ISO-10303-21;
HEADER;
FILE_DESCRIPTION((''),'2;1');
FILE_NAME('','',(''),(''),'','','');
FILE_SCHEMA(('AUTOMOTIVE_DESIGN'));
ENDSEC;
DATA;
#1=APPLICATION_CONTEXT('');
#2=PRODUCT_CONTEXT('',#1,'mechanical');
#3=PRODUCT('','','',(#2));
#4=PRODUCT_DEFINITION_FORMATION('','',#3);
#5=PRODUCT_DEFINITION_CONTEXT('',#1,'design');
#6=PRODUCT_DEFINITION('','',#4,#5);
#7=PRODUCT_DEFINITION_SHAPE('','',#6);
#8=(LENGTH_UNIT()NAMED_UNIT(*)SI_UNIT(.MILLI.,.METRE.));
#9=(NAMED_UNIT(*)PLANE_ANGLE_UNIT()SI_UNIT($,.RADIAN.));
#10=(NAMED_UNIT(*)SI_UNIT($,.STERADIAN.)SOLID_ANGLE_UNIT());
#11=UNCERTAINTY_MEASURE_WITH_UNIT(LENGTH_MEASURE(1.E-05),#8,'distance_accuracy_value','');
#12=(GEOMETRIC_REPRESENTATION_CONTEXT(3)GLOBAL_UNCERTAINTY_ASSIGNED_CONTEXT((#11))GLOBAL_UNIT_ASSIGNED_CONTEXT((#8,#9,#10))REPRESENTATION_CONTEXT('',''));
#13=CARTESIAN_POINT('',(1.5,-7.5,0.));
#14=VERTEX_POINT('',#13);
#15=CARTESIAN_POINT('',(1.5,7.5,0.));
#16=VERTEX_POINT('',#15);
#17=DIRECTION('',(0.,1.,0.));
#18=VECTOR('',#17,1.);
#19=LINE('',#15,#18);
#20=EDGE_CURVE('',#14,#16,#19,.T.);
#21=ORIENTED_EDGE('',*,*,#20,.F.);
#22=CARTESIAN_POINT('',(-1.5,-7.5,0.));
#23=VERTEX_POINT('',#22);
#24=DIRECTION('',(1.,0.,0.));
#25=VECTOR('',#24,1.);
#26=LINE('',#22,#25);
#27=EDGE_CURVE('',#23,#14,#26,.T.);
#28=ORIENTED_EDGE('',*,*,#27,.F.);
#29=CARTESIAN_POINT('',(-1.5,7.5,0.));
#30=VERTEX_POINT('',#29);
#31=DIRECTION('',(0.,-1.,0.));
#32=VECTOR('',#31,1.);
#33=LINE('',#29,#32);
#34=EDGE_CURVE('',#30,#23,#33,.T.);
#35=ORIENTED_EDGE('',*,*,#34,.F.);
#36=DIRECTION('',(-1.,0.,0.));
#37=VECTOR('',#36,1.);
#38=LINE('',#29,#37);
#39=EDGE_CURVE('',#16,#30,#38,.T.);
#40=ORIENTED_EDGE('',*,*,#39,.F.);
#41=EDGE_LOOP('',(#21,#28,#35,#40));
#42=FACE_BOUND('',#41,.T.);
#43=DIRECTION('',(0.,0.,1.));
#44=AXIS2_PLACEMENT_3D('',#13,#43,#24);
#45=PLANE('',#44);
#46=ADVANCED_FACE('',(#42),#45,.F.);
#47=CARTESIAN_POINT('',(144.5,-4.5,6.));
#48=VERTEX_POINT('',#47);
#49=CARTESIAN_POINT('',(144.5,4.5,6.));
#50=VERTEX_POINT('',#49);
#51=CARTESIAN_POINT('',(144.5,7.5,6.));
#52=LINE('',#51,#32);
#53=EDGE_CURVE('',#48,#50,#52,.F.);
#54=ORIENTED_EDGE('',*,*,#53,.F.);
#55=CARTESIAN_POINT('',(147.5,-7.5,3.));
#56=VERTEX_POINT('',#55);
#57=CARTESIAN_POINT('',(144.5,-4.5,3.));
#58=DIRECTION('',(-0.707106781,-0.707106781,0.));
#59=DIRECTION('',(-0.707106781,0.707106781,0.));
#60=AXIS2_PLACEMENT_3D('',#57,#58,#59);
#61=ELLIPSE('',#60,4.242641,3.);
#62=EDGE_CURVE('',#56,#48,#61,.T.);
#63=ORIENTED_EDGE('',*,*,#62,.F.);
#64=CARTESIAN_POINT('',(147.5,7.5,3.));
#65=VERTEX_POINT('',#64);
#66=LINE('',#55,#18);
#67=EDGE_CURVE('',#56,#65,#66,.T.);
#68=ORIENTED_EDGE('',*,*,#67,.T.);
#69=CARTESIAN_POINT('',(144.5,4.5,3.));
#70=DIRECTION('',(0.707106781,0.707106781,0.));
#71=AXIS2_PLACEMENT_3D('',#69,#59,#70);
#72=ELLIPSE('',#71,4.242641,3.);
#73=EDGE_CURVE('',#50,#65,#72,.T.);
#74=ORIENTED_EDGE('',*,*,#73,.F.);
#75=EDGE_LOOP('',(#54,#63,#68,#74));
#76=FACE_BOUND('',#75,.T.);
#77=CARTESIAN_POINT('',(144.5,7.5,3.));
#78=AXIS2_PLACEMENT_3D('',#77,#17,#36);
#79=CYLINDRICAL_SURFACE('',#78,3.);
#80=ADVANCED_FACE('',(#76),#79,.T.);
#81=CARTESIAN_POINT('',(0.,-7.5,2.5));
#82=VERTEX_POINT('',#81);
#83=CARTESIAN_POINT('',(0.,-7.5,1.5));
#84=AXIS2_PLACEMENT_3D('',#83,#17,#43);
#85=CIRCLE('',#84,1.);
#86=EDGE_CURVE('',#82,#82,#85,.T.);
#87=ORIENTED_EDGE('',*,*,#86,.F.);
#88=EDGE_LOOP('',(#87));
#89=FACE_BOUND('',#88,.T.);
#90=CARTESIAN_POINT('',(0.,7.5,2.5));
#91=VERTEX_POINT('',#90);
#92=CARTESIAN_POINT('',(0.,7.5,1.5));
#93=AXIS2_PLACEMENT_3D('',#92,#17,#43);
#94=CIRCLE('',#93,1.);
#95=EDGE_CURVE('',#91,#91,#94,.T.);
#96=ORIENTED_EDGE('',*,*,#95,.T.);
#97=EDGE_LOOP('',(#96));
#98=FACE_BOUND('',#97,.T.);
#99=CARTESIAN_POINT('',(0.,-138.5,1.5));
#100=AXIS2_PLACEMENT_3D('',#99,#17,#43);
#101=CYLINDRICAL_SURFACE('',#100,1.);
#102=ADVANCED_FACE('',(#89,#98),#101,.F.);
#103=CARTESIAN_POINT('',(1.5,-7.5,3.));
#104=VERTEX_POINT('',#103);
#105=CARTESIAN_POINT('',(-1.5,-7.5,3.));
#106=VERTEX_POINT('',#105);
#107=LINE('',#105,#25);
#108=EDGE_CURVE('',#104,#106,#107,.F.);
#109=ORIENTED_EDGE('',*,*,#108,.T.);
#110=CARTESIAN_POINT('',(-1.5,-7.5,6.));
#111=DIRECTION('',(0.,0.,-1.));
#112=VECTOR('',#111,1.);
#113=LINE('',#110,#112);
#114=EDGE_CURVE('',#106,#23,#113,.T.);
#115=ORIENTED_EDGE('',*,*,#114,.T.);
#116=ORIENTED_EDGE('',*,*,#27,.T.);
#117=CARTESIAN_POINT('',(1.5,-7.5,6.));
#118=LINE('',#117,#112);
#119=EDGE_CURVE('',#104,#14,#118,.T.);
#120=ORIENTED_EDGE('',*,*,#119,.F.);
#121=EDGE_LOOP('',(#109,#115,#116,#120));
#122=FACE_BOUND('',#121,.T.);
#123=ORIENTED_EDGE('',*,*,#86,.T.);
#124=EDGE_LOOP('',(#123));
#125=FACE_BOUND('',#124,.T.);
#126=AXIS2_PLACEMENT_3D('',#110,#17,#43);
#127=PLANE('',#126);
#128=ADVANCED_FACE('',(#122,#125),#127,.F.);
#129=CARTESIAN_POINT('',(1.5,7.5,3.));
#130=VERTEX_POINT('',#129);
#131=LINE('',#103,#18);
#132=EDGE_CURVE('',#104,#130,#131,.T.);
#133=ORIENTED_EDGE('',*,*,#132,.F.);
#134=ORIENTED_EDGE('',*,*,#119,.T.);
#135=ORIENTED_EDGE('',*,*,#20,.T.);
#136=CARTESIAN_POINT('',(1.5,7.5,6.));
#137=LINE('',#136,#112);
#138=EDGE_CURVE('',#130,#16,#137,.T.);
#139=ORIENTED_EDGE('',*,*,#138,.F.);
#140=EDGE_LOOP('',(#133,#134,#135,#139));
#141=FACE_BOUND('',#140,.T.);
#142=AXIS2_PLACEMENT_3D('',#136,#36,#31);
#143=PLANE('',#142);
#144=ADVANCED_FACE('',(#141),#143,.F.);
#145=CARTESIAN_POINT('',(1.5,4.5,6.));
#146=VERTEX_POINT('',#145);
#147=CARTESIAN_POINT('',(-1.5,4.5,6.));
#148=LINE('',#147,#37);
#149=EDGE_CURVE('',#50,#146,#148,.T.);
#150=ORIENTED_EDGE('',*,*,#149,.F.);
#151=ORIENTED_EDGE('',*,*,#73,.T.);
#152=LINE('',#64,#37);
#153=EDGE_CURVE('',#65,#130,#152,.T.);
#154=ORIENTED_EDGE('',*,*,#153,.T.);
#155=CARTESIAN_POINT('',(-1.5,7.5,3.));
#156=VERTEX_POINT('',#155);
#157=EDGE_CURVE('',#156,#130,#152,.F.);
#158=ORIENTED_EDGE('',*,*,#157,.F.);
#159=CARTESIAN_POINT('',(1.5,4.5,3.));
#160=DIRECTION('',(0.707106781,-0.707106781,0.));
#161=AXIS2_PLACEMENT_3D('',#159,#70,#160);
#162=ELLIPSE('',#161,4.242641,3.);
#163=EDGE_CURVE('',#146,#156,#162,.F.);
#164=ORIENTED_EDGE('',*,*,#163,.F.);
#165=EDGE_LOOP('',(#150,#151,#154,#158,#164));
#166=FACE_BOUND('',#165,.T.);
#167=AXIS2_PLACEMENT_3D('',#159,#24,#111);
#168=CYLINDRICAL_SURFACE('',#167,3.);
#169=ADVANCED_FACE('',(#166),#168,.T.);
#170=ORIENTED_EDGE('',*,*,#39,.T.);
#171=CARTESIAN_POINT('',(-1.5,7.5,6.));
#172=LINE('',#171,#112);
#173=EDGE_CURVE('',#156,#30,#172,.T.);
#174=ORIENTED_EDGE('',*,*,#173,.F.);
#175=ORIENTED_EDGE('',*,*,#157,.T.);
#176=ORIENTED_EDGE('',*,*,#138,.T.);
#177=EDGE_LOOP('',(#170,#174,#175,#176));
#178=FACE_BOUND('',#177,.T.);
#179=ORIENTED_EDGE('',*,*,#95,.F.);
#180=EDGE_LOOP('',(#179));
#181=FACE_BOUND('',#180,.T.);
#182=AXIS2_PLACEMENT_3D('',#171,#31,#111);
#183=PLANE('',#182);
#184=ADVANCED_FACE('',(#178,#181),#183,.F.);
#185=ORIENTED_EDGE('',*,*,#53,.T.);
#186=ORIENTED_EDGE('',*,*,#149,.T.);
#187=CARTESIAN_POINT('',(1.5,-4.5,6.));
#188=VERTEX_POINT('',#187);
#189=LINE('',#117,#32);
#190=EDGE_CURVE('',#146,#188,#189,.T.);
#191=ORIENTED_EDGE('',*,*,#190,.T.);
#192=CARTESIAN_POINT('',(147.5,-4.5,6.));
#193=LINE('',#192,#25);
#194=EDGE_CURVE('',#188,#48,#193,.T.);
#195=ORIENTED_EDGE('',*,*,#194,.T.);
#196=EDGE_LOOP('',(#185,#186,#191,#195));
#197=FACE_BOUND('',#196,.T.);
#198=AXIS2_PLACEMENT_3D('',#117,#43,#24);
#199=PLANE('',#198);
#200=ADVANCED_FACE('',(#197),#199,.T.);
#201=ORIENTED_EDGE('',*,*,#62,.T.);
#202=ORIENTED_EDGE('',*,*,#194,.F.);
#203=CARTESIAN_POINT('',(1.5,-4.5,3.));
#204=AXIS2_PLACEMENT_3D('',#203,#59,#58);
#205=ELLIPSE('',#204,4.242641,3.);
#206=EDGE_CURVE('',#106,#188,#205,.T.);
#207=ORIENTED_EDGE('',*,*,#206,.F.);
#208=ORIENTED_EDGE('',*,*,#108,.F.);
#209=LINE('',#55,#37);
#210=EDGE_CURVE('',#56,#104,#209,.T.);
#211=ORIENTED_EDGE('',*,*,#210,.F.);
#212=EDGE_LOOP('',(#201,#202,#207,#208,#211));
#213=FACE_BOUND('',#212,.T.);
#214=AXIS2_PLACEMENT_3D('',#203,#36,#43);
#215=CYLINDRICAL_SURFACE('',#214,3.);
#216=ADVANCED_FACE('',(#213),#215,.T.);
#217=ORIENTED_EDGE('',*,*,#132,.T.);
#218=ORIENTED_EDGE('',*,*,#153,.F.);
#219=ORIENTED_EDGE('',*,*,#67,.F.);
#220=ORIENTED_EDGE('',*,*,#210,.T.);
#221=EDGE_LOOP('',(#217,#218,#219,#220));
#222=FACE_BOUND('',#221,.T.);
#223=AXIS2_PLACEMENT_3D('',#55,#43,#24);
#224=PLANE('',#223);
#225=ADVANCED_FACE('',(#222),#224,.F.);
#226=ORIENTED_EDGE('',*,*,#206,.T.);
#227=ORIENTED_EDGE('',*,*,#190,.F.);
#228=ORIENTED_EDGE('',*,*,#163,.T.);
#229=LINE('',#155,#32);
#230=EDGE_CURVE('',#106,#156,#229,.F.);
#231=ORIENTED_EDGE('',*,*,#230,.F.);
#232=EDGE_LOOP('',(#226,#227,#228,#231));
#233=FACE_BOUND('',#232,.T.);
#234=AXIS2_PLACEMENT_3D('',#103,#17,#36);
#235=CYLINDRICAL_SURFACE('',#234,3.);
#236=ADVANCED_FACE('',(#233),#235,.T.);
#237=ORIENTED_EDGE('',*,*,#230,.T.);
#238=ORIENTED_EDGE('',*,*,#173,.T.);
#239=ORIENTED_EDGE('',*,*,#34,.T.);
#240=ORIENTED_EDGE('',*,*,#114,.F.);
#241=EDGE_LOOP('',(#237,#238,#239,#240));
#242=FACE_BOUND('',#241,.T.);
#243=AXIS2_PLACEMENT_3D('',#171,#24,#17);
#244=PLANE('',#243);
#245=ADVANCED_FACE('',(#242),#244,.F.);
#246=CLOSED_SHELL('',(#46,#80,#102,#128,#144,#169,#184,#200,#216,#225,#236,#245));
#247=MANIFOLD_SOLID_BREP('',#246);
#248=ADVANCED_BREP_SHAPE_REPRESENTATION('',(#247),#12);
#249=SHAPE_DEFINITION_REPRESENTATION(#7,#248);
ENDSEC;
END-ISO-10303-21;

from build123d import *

# Parameters (mm, degrees)
SKETCH_1_W          = 3
SKETCH_1_H          = 15
EXTRUDE_1_DEPTH     = 6
SKETCH_2_W          = 3
SKETCH_2_H          = 15
EXTRUDE_2_DEPTH     = 146
SKETCH_3_R          = 1
CUT_EXTRUDE_1_DEPTH = 146
FILLET_1_R          = 3


with BuildPart() as part:
    # 草图1 → 凸台-拉伸1 (new body)
    with BuildSketch(Plane.XY):
        Rectangle(SKETCH_1_W, SKETCH_1_H)
    extrude(amount=EXTRUDE_1_DEPTH)

    # 草图2 → 凸台-拉伸2 (add)
    with BuildSketch(Plane(origin=(1.5, 0, 0), x_dir=(0, 0, -1), z_dir=(1, 0, 0))):
        with Locations((-4.5, 0)):
            Rectangle(SKETCH_2_W, SKETCH_2_H)
    extrude(amount=EXTRUDE_2_DEPTH)

    # 草图3 → 切除-拉伸1 (cut)
    with BuildSketch(Plane(origin=(0, 7.5, 0), x_dir=(1, 0, 0), z_dir=(0, 1, 0))):
        with Locations(Location((0, -1.5, 0), (0, 0, 270))):
            Circle(SKETCH_3_R)
    extrude(amount=-CUT_EXTRUDE_1_DEPTH, mode=Mode.SUBTRACT)

    # 圆角1
    fillet_1_edges = [part.edges().sort_by_distance(p)[0] for p in [
        (-1.5, 0, 6),
        (73, 7.5, 6),
        (147.5, 0, 6),
        (73, -7.5, 6),
    ]]
    fillet(fillet_1_edges, radius=FILLET_1_R - 0.0001)  # a hair under: the kernel refuses the full size


solid = part.part
